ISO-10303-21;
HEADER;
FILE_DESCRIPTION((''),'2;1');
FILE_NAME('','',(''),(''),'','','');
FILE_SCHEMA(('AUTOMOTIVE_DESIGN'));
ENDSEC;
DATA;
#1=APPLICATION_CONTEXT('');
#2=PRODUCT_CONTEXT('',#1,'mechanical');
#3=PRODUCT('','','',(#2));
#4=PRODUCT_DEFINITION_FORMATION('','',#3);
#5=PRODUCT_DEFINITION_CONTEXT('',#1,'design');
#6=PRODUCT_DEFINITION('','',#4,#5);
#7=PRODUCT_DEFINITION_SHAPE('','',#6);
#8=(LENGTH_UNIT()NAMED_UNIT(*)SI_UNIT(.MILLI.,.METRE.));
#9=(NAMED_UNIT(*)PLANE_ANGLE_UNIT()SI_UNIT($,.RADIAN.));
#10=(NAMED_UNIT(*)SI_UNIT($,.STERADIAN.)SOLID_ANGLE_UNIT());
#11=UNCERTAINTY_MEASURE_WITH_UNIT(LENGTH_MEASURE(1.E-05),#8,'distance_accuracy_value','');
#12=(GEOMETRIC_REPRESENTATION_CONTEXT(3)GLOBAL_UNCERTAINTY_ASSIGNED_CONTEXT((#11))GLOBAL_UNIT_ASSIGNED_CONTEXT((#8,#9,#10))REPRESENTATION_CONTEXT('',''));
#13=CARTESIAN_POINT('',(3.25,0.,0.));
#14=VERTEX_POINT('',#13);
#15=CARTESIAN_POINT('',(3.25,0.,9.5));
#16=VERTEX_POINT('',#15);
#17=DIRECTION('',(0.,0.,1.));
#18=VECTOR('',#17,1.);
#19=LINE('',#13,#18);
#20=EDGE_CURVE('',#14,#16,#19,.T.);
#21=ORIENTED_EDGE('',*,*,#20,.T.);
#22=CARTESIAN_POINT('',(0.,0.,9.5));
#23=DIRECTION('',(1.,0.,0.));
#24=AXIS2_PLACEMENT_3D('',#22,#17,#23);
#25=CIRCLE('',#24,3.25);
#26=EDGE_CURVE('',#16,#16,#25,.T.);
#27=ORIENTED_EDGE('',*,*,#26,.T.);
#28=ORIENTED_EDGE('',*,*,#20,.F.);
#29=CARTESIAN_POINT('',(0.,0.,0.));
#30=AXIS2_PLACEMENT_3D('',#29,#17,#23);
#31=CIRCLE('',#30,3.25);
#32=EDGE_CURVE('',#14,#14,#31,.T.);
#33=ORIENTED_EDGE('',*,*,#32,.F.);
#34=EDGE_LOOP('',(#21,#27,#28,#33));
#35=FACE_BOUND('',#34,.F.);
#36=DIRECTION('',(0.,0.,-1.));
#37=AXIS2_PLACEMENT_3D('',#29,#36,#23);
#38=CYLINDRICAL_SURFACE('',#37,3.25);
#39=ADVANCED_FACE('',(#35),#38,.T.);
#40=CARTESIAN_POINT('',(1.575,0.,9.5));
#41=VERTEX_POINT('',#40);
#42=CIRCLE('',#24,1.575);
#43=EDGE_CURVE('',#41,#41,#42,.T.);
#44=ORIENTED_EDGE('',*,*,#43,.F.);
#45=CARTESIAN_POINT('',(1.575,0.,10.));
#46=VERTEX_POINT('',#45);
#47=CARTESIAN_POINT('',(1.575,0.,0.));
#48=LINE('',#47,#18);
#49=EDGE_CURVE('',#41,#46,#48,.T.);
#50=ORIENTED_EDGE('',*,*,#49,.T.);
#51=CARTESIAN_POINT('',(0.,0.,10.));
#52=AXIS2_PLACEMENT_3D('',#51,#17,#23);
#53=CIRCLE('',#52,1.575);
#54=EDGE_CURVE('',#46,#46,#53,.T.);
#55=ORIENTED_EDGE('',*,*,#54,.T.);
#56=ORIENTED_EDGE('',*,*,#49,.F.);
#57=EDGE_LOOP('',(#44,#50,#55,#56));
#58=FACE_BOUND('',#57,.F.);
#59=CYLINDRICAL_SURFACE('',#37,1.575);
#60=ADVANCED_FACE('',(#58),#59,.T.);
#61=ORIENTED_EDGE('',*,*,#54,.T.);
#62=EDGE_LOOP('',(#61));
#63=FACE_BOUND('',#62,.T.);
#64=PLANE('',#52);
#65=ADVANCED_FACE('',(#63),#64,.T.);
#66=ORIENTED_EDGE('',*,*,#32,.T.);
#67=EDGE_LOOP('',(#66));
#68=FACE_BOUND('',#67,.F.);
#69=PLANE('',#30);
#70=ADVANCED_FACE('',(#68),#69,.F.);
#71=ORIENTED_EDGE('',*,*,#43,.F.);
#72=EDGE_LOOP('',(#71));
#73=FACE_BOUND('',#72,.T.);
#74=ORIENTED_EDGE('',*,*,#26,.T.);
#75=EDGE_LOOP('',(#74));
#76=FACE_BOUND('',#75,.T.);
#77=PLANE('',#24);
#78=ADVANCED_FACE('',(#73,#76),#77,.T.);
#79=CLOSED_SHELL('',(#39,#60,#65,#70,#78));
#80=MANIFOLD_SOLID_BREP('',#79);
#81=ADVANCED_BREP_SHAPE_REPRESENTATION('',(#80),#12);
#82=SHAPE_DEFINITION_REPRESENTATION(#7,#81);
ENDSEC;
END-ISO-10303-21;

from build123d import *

# Parameters (mm, degrees)
F0_R     = 3.25
F0_R_2   = 1.575
F1_DEPTH = 9.5
F2_DEPTH = 10


# Not quite as in the source:
# - a feature of the source that left no trace in its solid (it failed there, or was rolled back) is left out


with BuildPart() as f1:
    # F0 (on Top) → F1 (new body)
    with BuildSketch(Plane.XY):
        Circle(F0_R)
        Circle(F0_R_2, mode=Mode.SUBTRACT)
    extrude(amount=F1_DEPTH)

    # F0 (on Top) → F2 (join)
    with BuildSketch(Plane.XY):
        Circle(F0_R_2)
    extrude(amount=F2_DEPTH)


solid = f1.part
